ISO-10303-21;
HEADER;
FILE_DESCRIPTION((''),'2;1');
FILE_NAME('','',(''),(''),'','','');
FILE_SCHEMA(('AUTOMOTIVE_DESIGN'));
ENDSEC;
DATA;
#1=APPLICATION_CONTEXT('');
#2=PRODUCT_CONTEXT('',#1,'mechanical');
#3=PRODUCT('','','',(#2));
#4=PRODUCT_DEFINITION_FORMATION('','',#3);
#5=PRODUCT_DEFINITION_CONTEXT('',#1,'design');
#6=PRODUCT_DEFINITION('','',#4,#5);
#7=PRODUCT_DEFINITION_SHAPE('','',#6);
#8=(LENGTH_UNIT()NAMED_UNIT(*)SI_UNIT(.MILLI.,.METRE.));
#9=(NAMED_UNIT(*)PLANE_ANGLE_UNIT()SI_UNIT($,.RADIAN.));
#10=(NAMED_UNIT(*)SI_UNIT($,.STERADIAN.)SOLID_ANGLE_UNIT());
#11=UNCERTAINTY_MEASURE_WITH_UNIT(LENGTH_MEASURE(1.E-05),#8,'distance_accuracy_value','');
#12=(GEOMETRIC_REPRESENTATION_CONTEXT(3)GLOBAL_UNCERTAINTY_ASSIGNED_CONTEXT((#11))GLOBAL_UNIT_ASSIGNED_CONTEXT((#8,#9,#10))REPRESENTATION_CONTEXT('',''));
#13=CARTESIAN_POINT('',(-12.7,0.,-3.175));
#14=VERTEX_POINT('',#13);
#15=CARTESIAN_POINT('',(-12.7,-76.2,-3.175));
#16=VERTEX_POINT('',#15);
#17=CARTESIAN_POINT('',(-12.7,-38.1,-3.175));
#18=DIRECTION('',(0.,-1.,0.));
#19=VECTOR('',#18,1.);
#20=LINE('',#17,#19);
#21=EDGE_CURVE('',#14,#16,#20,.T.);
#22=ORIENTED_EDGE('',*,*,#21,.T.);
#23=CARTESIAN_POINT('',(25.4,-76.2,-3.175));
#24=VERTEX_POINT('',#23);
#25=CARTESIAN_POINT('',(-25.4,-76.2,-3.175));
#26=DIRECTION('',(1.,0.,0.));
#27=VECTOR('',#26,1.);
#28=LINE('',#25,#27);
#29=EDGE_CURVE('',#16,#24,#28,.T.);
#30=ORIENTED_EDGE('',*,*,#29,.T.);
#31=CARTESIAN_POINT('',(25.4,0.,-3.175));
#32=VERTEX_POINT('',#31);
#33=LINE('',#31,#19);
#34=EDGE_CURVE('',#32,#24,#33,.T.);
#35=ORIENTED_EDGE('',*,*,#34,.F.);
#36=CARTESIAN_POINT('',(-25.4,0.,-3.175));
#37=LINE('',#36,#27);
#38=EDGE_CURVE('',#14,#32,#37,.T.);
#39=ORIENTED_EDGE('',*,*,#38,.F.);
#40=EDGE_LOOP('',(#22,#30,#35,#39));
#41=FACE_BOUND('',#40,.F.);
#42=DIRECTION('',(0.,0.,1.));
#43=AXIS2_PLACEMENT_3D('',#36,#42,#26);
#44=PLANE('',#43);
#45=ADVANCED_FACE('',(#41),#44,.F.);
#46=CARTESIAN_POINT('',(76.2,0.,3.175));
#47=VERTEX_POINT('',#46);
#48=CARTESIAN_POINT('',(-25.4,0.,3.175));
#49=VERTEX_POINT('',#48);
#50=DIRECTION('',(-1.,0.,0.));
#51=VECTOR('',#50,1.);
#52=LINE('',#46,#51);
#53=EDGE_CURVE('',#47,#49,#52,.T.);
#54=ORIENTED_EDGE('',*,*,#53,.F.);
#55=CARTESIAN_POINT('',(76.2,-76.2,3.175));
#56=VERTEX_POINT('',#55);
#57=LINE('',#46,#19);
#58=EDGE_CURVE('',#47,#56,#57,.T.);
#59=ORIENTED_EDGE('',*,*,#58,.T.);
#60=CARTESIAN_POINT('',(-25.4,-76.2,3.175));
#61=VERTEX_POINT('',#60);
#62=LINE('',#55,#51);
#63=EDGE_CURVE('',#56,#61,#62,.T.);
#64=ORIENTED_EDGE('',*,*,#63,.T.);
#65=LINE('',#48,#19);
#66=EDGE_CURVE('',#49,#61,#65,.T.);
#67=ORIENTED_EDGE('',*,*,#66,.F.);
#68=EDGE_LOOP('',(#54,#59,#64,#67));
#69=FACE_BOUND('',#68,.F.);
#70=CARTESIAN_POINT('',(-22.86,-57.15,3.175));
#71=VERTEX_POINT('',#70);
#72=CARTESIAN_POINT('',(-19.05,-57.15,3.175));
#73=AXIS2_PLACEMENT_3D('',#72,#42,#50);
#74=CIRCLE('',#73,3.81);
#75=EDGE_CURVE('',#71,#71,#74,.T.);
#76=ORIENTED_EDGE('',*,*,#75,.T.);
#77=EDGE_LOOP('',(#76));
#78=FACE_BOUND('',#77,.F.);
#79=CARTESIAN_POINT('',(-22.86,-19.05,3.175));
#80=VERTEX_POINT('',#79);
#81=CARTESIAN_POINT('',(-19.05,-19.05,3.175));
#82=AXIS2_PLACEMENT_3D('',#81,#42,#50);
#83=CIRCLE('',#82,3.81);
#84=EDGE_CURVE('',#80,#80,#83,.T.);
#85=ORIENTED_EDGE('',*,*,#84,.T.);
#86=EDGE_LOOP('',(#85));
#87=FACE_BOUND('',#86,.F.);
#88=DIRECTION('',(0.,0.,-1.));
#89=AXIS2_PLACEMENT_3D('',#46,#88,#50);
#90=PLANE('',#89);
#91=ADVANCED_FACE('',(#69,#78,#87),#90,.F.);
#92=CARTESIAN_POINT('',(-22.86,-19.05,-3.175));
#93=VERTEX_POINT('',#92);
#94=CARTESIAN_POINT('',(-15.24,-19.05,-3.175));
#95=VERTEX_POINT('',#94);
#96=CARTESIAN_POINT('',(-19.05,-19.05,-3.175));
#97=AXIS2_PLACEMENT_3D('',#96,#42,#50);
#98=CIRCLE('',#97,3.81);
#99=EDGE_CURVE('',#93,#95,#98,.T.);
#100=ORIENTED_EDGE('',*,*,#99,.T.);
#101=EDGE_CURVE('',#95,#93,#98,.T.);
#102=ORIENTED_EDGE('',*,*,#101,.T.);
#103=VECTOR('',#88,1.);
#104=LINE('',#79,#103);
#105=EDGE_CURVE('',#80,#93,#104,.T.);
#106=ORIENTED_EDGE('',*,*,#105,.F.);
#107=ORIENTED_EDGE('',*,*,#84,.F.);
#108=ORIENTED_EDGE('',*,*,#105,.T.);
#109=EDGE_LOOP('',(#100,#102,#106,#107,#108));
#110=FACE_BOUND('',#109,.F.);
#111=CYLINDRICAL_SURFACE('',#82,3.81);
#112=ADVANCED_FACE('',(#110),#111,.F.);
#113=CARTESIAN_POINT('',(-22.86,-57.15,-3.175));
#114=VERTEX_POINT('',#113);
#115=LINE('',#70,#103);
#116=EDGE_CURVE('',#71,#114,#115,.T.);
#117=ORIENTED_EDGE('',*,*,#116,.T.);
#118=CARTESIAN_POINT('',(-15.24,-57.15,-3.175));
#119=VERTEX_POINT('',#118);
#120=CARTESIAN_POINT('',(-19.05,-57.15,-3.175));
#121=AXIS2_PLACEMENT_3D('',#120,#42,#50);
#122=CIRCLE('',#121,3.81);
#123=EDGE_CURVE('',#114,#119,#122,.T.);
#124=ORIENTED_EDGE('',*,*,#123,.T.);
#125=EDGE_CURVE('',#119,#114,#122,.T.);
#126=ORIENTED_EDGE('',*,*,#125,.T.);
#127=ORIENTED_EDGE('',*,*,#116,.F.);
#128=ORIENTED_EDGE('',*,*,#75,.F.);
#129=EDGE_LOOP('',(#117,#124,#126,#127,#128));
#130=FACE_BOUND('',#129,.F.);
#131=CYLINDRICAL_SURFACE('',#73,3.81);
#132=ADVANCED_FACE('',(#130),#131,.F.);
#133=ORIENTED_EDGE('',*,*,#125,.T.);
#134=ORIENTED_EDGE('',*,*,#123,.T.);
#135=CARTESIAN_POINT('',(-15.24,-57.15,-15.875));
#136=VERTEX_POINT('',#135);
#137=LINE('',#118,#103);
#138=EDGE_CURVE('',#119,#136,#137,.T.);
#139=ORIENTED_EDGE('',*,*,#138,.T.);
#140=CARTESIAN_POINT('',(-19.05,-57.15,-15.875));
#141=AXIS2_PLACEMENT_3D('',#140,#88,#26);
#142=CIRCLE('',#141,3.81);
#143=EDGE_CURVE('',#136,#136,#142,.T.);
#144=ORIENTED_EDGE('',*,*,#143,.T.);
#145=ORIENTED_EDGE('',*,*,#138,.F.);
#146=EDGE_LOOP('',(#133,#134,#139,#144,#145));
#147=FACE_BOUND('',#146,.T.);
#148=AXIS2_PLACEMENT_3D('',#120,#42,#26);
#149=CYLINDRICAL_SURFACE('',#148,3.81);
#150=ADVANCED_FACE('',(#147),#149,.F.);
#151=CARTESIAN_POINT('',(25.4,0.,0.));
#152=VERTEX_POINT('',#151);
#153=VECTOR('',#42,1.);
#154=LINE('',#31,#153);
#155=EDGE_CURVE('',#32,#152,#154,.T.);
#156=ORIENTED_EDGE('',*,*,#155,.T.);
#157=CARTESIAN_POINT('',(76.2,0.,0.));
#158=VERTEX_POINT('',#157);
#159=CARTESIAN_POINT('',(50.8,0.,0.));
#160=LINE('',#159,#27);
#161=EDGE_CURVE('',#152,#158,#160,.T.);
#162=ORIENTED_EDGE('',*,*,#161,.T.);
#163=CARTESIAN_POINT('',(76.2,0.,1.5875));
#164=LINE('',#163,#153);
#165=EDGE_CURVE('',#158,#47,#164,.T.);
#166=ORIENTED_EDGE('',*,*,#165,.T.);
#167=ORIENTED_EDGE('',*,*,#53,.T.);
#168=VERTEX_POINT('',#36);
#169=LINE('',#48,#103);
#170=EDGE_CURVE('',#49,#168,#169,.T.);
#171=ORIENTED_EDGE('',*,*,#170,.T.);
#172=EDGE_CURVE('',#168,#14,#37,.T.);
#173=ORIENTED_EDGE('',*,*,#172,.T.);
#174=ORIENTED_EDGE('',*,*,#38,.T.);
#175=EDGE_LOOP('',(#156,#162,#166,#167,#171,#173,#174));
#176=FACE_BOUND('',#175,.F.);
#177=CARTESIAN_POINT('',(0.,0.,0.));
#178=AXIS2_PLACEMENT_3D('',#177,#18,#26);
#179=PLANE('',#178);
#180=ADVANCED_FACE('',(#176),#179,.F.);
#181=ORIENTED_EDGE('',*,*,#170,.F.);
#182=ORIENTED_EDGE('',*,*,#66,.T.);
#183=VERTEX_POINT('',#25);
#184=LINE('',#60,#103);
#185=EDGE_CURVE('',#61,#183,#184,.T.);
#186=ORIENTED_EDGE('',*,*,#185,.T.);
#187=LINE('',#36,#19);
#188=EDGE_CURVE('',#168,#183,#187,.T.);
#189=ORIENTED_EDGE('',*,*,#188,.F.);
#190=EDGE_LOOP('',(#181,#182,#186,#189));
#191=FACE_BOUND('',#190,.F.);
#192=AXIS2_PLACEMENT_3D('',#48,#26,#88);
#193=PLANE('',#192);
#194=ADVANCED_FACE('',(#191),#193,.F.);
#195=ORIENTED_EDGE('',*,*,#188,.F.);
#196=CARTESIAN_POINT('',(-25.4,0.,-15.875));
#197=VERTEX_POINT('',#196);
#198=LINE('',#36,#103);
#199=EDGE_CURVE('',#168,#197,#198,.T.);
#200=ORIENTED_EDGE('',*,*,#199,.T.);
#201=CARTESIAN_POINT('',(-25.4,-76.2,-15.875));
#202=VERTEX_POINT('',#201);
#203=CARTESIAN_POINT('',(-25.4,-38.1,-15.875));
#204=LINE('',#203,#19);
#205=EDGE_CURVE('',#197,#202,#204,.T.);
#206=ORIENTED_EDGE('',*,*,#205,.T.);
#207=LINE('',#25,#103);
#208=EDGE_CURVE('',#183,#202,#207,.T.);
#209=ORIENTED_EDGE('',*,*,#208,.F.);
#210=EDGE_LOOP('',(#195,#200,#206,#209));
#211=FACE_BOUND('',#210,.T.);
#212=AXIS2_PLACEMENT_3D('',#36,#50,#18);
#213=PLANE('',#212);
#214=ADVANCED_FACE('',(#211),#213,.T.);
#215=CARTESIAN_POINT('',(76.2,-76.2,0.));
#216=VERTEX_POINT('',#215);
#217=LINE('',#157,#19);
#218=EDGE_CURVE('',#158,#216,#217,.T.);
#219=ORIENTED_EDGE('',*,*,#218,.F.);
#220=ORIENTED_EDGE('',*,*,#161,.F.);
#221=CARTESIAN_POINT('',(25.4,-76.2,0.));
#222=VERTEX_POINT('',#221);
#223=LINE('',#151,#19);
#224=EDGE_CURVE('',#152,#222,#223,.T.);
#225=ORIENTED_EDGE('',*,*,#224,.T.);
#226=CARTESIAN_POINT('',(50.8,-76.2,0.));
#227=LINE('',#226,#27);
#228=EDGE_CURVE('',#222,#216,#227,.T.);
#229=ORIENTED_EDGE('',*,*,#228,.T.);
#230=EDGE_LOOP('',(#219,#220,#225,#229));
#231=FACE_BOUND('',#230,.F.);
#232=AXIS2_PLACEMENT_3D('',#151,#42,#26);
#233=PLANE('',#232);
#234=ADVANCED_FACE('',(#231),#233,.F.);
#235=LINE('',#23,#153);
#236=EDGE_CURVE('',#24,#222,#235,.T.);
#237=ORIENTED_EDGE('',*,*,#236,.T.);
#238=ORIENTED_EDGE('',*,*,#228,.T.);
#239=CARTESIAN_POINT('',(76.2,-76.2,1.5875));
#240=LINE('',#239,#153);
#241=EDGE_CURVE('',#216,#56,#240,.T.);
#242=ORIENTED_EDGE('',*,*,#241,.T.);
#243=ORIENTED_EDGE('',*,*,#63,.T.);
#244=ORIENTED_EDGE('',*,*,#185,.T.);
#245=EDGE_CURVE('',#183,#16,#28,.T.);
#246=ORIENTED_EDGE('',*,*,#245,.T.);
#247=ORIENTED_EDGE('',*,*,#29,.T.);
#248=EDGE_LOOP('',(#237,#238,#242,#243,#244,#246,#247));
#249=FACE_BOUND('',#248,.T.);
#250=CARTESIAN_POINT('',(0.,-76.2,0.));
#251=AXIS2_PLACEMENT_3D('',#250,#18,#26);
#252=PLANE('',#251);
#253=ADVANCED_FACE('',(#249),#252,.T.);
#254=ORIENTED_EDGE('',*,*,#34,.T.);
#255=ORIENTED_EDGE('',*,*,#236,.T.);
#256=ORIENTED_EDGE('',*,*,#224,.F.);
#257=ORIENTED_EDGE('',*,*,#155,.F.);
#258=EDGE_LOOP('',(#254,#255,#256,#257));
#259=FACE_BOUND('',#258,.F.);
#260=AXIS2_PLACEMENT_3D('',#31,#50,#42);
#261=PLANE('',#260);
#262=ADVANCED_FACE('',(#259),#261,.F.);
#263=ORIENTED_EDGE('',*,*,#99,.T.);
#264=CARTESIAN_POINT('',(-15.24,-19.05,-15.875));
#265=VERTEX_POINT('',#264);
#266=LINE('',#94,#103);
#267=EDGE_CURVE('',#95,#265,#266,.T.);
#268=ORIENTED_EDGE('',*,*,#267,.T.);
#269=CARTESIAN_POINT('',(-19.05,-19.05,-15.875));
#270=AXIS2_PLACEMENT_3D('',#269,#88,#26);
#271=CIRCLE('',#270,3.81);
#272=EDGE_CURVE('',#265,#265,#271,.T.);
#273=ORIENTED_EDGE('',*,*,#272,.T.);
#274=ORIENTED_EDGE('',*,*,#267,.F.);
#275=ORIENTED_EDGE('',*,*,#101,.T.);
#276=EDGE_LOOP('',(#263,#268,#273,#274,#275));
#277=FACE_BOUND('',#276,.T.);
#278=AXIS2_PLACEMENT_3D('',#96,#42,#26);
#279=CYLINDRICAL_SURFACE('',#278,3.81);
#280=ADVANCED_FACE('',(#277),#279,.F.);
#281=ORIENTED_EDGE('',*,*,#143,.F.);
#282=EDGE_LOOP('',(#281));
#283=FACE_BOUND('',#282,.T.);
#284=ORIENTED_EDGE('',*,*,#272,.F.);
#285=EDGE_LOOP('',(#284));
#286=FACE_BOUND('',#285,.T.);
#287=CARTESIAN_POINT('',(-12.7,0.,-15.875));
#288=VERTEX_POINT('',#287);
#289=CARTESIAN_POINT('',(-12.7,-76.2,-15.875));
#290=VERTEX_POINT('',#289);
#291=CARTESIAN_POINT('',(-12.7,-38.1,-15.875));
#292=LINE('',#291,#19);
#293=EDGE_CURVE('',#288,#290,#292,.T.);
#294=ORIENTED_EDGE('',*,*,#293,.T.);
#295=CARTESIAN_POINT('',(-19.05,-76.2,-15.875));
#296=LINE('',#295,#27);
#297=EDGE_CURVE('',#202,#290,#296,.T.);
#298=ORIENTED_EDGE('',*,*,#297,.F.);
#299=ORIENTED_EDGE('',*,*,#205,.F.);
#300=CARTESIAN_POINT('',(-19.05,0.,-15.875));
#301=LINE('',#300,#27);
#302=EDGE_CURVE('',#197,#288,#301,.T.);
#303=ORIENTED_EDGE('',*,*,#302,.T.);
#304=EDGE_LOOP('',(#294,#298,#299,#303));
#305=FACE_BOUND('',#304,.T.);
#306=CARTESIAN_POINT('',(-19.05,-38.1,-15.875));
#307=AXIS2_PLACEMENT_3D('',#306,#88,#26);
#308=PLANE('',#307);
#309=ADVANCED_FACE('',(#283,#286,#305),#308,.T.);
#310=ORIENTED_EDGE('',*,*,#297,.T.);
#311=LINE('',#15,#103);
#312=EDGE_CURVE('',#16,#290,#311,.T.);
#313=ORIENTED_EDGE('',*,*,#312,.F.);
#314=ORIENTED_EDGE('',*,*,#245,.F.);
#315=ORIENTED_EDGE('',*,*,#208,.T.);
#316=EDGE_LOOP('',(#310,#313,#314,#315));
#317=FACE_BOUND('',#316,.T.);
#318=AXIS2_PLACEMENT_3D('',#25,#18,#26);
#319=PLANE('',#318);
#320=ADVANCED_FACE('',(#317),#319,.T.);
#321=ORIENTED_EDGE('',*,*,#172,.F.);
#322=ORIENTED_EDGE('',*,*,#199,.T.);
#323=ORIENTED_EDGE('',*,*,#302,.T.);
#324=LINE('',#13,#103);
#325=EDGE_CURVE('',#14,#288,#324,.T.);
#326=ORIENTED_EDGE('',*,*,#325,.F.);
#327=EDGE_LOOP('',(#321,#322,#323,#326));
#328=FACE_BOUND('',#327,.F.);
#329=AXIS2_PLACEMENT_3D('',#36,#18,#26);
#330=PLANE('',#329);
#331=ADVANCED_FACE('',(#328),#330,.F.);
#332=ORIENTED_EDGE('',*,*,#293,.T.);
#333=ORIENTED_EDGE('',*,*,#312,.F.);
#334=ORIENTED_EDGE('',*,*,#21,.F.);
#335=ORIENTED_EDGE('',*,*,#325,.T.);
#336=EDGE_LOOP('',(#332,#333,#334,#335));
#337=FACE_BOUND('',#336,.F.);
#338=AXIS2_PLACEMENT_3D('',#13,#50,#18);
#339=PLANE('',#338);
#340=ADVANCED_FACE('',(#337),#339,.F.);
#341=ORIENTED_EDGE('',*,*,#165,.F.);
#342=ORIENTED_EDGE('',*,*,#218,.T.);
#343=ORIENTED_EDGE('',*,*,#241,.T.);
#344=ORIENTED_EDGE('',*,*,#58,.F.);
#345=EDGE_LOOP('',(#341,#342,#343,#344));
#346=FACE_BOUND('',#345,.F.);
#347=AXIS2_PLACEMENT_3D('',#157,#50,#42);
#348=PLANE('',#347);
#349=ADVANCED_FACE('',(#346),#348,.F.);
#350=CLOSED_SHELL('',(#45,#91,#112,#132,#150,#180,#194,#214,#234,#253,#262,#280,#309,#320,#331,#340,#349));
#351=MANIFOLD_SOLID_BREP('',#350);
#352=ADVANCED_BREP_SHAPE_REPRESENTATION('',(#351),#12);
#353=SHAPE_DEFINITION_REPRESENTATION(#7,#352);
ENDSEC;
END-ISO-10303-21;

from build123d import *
from build123d import SkipClean  # not in build123d's __all__

# Parameters (mm, degrees)
F0_W     = 50.8
F0_H     = 3.175
F1_DEPTH = 76.2
F3_DEPTH = 6.351
F4_W     = 12.7
F4_H     = 76.2
F4_R     = 3.81
F5_DEPTH = 12.7


with BuildPart() as f1:
    # F0 (on Front) → F1 (new body)
    with BuildSketch(Plane.XZ):
        Polygon((25.4, 3.175), (-25.4, 3.175), (-25.4, -3.175), (25.4, -3.175), (25.4, 0), align=None)
        with Locations((50.8, 1.5875)):
            Rectangle(F0_W, F0_H)
    extrude(amount=F1_DEPTH)

    # F2 (on face) → F3 (cut, through all)
    with BuildSketch(Plane.XY.offset(3.175)):
        with BuildLine():
            Line((-22.86, -19.05), (-15.24, -19.05))
            ThreePointArc((-15.24, -19.05), (-19.05, -15.24), (-22.86, -19.05))
        make_face()
        with BuildLine():
            ThreePointArc((-22.86, -19.05), (-19.05, -22.86), (-15.24, -19.05))
            Line((-15.24, -19.05), (-22.86, -19.05))
        make_face()
        with BuildLine():
            Line((-22.86, -57.15), (-15.24, -57.15))
            ThreePointArc((-15.24, -57.15), (-19.05, -53.34), (-22.86, -57.15))
        make_face()
        with BuildLine():
            ThreePointArc((-22.86, -57.15), (-19.05, -60.96), (-15.24, -57.15))
            Line((-15.24, -57.15), (-22.86, -57.15))
        make_face()
    extrude(amount=-F3_DEPTH, mode=Mode.SUBTRACT)

    # F4 (on face) → F5 (join)
    with BuildSketch(Plane(origin=(0, 0, -3.175), x_dir=(1, 0, 0), z_dir=(0, 0, -1))):
        with Locations((-19.05, 38.1)):
            Rectangle(F4_W, F4_H)
        with Locations((-19.05, 19.05)):
            Circle(F4_R, mode=Mode.SUBTRACT)
        with Locations((-19.05, 57.15)):
            Circle(F4_R, mode=Mode.SUBTRACT)
    with SkipClean():  # cleaning this boolean's faces spoils the solid; the shape is the same uncleaned
        extrude(amount=F5_DEPTH)


solid = f1.part
